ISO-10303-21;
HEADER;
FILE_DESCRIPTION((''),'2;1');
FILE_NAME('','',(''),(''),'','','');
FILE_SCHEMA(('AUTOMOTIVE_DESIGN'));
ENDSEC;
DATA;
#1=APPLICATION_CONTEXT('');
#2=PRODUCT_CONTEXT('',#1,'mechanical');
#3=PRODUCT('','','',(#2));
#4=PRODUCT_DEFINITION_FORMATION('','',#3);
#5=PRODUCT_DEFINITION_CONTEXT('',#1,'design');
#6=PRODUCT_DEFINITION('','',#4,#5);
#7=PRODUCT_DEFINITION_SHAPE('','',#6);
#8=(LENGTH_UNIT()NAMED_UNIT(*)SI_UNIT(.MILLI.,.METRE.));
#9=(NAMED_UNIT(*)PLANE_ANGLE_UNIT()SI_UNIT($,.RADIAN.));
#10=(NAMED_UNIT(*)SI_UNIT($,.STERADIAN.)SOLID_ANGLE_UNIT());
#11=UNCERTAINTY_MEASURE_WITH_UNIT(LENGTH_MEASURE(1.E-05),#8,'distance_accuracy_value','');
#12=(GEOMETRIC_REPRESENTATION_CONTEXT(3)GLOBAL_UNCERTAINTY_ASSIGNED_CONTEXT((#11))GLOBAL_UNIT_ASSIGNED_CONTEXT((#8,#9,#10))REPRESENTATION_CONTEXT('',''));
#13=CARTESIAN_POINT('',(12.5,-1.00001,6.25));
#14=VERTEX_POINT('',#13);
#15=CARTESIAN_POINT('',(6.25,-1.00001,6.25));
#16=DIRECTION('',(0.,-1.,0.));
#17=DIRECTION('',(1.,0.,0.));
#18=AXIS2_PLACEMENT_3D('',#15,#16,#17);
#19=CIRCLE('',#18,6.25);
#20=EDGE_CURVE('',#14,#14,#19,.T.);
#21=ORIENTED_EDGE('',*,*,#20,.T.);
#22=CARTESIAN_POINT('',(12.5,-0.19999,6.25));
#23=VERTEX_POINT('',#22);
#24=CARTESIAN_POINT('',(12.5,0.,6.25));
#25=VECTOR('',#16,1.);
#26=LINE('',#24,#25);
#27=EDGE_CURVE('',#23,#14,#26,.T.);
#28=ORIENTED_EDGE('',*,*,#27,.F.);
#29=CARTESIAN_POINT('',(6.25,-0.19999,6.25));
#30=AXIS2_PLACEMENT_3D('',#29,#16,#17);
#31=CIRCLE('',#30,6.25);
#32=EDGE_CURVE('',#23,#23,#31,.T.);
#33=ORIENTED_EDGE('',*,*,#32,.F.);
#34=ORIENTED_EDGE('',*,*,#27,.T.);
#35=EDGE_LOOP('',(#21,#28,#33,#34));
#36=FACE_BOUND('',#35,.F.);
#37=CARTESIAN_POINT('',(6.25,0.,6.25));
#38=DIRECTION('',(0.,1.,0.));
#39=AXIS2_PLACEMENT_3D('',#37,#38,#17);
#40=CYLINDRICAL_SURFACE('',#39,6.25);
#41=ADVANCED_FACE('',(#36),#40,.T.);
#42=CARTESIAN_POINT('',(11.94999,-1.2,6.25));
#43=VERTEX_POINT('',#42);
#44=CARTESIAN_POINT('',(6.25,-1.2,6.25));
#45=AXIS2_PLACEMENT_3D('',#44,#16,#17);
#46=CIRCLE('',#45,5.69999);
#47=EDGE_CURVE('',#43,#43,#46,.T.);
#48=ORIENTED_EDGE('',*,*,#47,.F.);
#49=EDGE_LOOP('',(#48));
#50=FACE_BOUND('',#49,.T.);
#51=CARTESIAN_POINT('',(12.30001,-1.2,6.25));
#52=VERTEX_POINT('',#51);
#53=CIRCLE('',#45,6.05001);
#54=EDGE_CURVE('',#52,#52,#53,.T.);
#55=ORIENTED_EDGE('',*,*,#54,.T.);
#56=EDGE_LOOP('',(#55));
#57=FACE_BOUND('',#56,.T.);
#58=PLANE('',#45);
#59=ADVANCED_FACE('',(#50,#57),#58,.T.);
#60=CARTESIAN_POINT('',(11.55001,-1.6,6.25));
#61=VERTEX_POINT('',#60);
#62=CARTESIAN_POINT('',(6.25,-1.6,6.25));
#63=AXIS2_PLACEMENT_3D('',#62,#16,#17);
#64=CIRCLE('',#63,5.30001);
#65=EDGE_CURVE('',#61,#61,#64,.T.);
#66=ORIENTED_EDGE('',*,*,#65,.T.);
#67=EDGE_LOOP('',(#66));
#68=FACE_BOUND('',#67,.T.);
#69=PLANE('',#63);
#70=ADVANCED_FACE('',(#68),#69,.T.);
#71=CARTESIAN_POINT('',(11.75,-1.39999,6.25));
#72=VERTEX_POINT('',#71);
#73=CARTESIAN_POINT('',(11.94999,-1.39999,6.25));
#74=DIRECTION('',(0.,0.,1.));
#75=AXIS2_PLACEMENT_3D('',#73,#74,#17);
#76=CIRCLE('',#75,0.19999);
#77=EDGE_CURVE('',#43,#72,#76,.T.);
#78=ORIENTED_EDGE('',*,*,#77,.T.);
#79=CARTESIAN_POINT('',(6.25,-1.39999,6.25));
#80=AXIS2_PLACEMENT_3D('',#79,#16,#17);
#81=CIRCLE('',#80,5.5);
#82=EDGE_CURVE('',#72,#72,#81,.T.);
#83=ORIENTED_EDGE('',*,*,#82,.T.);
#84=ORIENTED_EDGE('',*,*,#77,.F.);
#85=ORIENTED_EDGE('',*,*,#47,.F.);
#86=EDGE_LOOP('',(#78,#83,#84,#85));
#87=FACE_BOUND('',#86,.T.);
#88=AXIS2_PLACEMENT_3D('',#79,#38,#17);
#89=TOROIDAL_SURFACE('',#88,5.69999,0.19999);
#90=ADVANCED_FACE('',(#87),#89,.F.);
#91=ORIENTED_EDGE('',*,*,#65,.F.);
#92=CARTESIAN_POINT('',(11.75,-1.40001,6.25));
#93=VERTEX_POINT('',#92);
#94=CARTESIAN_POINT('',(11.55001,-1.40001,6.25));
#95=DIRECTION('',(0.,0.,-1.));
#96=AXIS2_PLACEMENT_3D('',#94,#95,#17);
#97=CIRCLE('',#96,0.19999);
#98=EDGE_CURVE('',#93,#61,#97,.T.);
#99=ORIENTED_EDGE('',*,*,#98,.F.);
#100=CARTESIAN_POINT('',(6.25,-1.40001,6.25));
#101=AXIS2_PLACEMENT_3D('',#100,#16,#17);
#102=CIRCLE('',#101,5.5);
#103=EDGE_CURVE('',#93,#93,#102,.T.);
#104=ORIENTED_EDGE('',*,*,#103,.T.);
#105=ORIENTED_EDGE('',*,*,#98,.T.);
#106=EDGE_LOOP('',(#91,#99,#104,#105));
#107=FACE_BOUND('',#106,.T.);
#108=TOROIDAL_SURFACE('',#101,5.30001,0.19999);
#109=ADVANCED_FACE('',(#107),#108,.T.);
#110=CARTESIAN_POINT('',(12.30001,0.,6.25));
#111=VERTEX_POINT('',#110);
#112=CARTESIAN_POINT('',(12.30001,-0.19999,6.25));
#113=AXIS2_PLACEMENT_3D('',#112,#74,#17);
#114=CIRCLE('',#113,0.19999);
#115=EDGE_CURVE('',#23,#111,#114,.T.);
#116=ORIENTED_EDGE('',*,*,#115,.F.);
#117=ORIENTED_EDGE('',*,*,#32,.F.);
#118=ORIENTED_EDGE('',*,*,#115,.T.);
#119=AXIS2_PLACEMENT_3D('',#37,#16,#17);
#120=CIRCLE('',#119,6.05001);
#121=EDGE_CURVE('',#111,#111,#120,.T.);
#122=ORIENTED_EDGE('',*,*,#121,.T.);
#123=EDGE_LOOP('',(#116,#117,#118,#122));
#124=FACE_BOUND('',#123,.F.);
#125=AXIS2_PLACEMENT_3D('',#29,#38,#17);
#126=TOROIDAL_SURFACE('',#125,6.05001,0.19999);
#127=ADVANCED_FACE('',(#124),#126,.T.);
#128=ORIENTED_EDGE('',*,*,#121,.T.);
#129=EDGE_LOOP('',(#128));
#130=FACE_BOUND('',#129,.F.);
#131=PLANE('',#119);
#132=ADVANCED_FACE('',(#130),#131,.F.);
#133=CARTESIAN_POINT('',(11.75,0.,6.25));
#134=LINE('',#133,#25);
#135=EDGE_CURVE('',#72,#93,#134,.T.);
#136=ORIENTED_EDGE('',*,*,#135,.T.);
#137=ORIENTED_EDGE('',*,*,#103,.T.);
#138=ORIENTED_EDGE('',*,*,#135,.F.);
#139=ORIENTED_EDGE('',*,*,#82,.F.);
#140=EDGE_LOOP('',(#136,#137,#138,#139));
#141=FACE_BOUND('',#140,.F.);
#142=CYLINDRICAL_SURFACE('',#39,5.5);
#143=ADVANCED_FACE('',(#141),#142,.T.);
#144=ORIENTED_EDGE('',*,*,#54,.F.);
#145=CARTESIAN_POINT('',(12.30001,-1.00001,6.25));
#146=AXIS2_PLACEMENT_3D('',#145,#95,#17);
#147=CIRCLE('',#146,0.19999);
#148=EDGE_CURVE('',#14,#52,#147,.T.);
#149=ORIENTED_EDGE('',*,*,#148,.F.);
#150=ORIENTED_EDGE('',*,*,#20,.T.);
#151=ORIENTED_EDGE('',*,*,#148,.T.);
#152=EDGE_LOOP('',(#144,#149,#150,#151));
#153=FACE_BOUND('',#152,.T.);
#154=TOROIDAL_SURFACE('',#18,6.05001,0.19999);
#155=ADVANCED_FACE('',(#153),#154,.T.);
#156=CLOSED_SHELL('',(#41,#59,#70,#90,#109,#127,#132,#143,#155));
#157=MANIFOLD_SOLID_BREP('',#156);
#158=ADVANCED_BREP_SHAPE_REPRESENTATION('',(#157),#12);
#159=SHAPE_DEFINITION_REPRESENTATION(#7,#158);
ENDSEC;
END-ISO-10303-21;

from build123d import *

# Parameters (mm, degrees)
F0_R     = 5.5
F1_DEPTH = 1.6
F0_R_2   = 6.25
F2_DEPTH = 1.2
F3_R     = 0.19999


# Not quite as in the source:
# - a fillet or chamfer is up to 0.001 mm smaller than in the source, because OpenCascade refuses the exact size


with BuildPart() as f1:
    # F0 (on Front) → F1 (new body)
    with BuildSketch(Plane.XZ):
        with Locations((6.25, 6.25)):
            Circle(F0_R)
    extrude(amount=F1_DEPTH)

    # F0 (on Front) → F2 (join)
    with BuildSketch(Plane.XZ):
        with Locations((6.25, 6.25)):
            Circle(F0_R_2)
        with Locations((6.25, 6.25)):
            Circle(F0_R, mode=Mode.SUBTRACT)
    extrude(amount=F2_DEPTH)

    # F3 (radius 0.2 in the source; OpenCascade refuses exactly that, so slightly less here)
    f3_edges = [f1.edges().sort_by_distance(p)[0] for p in [
        (0.75, -1.6, 6.25),
        (12.5, -0.6, 6.25),
        (0, 0, 6.25),
        (0, -1.2, 6.25),
        (0.75, -1.2, 6.25),
        (11.75, -1.4, 6.25),
    ]]
    fillet(f3_edges, radius=F3_R)


solid = f1.part
